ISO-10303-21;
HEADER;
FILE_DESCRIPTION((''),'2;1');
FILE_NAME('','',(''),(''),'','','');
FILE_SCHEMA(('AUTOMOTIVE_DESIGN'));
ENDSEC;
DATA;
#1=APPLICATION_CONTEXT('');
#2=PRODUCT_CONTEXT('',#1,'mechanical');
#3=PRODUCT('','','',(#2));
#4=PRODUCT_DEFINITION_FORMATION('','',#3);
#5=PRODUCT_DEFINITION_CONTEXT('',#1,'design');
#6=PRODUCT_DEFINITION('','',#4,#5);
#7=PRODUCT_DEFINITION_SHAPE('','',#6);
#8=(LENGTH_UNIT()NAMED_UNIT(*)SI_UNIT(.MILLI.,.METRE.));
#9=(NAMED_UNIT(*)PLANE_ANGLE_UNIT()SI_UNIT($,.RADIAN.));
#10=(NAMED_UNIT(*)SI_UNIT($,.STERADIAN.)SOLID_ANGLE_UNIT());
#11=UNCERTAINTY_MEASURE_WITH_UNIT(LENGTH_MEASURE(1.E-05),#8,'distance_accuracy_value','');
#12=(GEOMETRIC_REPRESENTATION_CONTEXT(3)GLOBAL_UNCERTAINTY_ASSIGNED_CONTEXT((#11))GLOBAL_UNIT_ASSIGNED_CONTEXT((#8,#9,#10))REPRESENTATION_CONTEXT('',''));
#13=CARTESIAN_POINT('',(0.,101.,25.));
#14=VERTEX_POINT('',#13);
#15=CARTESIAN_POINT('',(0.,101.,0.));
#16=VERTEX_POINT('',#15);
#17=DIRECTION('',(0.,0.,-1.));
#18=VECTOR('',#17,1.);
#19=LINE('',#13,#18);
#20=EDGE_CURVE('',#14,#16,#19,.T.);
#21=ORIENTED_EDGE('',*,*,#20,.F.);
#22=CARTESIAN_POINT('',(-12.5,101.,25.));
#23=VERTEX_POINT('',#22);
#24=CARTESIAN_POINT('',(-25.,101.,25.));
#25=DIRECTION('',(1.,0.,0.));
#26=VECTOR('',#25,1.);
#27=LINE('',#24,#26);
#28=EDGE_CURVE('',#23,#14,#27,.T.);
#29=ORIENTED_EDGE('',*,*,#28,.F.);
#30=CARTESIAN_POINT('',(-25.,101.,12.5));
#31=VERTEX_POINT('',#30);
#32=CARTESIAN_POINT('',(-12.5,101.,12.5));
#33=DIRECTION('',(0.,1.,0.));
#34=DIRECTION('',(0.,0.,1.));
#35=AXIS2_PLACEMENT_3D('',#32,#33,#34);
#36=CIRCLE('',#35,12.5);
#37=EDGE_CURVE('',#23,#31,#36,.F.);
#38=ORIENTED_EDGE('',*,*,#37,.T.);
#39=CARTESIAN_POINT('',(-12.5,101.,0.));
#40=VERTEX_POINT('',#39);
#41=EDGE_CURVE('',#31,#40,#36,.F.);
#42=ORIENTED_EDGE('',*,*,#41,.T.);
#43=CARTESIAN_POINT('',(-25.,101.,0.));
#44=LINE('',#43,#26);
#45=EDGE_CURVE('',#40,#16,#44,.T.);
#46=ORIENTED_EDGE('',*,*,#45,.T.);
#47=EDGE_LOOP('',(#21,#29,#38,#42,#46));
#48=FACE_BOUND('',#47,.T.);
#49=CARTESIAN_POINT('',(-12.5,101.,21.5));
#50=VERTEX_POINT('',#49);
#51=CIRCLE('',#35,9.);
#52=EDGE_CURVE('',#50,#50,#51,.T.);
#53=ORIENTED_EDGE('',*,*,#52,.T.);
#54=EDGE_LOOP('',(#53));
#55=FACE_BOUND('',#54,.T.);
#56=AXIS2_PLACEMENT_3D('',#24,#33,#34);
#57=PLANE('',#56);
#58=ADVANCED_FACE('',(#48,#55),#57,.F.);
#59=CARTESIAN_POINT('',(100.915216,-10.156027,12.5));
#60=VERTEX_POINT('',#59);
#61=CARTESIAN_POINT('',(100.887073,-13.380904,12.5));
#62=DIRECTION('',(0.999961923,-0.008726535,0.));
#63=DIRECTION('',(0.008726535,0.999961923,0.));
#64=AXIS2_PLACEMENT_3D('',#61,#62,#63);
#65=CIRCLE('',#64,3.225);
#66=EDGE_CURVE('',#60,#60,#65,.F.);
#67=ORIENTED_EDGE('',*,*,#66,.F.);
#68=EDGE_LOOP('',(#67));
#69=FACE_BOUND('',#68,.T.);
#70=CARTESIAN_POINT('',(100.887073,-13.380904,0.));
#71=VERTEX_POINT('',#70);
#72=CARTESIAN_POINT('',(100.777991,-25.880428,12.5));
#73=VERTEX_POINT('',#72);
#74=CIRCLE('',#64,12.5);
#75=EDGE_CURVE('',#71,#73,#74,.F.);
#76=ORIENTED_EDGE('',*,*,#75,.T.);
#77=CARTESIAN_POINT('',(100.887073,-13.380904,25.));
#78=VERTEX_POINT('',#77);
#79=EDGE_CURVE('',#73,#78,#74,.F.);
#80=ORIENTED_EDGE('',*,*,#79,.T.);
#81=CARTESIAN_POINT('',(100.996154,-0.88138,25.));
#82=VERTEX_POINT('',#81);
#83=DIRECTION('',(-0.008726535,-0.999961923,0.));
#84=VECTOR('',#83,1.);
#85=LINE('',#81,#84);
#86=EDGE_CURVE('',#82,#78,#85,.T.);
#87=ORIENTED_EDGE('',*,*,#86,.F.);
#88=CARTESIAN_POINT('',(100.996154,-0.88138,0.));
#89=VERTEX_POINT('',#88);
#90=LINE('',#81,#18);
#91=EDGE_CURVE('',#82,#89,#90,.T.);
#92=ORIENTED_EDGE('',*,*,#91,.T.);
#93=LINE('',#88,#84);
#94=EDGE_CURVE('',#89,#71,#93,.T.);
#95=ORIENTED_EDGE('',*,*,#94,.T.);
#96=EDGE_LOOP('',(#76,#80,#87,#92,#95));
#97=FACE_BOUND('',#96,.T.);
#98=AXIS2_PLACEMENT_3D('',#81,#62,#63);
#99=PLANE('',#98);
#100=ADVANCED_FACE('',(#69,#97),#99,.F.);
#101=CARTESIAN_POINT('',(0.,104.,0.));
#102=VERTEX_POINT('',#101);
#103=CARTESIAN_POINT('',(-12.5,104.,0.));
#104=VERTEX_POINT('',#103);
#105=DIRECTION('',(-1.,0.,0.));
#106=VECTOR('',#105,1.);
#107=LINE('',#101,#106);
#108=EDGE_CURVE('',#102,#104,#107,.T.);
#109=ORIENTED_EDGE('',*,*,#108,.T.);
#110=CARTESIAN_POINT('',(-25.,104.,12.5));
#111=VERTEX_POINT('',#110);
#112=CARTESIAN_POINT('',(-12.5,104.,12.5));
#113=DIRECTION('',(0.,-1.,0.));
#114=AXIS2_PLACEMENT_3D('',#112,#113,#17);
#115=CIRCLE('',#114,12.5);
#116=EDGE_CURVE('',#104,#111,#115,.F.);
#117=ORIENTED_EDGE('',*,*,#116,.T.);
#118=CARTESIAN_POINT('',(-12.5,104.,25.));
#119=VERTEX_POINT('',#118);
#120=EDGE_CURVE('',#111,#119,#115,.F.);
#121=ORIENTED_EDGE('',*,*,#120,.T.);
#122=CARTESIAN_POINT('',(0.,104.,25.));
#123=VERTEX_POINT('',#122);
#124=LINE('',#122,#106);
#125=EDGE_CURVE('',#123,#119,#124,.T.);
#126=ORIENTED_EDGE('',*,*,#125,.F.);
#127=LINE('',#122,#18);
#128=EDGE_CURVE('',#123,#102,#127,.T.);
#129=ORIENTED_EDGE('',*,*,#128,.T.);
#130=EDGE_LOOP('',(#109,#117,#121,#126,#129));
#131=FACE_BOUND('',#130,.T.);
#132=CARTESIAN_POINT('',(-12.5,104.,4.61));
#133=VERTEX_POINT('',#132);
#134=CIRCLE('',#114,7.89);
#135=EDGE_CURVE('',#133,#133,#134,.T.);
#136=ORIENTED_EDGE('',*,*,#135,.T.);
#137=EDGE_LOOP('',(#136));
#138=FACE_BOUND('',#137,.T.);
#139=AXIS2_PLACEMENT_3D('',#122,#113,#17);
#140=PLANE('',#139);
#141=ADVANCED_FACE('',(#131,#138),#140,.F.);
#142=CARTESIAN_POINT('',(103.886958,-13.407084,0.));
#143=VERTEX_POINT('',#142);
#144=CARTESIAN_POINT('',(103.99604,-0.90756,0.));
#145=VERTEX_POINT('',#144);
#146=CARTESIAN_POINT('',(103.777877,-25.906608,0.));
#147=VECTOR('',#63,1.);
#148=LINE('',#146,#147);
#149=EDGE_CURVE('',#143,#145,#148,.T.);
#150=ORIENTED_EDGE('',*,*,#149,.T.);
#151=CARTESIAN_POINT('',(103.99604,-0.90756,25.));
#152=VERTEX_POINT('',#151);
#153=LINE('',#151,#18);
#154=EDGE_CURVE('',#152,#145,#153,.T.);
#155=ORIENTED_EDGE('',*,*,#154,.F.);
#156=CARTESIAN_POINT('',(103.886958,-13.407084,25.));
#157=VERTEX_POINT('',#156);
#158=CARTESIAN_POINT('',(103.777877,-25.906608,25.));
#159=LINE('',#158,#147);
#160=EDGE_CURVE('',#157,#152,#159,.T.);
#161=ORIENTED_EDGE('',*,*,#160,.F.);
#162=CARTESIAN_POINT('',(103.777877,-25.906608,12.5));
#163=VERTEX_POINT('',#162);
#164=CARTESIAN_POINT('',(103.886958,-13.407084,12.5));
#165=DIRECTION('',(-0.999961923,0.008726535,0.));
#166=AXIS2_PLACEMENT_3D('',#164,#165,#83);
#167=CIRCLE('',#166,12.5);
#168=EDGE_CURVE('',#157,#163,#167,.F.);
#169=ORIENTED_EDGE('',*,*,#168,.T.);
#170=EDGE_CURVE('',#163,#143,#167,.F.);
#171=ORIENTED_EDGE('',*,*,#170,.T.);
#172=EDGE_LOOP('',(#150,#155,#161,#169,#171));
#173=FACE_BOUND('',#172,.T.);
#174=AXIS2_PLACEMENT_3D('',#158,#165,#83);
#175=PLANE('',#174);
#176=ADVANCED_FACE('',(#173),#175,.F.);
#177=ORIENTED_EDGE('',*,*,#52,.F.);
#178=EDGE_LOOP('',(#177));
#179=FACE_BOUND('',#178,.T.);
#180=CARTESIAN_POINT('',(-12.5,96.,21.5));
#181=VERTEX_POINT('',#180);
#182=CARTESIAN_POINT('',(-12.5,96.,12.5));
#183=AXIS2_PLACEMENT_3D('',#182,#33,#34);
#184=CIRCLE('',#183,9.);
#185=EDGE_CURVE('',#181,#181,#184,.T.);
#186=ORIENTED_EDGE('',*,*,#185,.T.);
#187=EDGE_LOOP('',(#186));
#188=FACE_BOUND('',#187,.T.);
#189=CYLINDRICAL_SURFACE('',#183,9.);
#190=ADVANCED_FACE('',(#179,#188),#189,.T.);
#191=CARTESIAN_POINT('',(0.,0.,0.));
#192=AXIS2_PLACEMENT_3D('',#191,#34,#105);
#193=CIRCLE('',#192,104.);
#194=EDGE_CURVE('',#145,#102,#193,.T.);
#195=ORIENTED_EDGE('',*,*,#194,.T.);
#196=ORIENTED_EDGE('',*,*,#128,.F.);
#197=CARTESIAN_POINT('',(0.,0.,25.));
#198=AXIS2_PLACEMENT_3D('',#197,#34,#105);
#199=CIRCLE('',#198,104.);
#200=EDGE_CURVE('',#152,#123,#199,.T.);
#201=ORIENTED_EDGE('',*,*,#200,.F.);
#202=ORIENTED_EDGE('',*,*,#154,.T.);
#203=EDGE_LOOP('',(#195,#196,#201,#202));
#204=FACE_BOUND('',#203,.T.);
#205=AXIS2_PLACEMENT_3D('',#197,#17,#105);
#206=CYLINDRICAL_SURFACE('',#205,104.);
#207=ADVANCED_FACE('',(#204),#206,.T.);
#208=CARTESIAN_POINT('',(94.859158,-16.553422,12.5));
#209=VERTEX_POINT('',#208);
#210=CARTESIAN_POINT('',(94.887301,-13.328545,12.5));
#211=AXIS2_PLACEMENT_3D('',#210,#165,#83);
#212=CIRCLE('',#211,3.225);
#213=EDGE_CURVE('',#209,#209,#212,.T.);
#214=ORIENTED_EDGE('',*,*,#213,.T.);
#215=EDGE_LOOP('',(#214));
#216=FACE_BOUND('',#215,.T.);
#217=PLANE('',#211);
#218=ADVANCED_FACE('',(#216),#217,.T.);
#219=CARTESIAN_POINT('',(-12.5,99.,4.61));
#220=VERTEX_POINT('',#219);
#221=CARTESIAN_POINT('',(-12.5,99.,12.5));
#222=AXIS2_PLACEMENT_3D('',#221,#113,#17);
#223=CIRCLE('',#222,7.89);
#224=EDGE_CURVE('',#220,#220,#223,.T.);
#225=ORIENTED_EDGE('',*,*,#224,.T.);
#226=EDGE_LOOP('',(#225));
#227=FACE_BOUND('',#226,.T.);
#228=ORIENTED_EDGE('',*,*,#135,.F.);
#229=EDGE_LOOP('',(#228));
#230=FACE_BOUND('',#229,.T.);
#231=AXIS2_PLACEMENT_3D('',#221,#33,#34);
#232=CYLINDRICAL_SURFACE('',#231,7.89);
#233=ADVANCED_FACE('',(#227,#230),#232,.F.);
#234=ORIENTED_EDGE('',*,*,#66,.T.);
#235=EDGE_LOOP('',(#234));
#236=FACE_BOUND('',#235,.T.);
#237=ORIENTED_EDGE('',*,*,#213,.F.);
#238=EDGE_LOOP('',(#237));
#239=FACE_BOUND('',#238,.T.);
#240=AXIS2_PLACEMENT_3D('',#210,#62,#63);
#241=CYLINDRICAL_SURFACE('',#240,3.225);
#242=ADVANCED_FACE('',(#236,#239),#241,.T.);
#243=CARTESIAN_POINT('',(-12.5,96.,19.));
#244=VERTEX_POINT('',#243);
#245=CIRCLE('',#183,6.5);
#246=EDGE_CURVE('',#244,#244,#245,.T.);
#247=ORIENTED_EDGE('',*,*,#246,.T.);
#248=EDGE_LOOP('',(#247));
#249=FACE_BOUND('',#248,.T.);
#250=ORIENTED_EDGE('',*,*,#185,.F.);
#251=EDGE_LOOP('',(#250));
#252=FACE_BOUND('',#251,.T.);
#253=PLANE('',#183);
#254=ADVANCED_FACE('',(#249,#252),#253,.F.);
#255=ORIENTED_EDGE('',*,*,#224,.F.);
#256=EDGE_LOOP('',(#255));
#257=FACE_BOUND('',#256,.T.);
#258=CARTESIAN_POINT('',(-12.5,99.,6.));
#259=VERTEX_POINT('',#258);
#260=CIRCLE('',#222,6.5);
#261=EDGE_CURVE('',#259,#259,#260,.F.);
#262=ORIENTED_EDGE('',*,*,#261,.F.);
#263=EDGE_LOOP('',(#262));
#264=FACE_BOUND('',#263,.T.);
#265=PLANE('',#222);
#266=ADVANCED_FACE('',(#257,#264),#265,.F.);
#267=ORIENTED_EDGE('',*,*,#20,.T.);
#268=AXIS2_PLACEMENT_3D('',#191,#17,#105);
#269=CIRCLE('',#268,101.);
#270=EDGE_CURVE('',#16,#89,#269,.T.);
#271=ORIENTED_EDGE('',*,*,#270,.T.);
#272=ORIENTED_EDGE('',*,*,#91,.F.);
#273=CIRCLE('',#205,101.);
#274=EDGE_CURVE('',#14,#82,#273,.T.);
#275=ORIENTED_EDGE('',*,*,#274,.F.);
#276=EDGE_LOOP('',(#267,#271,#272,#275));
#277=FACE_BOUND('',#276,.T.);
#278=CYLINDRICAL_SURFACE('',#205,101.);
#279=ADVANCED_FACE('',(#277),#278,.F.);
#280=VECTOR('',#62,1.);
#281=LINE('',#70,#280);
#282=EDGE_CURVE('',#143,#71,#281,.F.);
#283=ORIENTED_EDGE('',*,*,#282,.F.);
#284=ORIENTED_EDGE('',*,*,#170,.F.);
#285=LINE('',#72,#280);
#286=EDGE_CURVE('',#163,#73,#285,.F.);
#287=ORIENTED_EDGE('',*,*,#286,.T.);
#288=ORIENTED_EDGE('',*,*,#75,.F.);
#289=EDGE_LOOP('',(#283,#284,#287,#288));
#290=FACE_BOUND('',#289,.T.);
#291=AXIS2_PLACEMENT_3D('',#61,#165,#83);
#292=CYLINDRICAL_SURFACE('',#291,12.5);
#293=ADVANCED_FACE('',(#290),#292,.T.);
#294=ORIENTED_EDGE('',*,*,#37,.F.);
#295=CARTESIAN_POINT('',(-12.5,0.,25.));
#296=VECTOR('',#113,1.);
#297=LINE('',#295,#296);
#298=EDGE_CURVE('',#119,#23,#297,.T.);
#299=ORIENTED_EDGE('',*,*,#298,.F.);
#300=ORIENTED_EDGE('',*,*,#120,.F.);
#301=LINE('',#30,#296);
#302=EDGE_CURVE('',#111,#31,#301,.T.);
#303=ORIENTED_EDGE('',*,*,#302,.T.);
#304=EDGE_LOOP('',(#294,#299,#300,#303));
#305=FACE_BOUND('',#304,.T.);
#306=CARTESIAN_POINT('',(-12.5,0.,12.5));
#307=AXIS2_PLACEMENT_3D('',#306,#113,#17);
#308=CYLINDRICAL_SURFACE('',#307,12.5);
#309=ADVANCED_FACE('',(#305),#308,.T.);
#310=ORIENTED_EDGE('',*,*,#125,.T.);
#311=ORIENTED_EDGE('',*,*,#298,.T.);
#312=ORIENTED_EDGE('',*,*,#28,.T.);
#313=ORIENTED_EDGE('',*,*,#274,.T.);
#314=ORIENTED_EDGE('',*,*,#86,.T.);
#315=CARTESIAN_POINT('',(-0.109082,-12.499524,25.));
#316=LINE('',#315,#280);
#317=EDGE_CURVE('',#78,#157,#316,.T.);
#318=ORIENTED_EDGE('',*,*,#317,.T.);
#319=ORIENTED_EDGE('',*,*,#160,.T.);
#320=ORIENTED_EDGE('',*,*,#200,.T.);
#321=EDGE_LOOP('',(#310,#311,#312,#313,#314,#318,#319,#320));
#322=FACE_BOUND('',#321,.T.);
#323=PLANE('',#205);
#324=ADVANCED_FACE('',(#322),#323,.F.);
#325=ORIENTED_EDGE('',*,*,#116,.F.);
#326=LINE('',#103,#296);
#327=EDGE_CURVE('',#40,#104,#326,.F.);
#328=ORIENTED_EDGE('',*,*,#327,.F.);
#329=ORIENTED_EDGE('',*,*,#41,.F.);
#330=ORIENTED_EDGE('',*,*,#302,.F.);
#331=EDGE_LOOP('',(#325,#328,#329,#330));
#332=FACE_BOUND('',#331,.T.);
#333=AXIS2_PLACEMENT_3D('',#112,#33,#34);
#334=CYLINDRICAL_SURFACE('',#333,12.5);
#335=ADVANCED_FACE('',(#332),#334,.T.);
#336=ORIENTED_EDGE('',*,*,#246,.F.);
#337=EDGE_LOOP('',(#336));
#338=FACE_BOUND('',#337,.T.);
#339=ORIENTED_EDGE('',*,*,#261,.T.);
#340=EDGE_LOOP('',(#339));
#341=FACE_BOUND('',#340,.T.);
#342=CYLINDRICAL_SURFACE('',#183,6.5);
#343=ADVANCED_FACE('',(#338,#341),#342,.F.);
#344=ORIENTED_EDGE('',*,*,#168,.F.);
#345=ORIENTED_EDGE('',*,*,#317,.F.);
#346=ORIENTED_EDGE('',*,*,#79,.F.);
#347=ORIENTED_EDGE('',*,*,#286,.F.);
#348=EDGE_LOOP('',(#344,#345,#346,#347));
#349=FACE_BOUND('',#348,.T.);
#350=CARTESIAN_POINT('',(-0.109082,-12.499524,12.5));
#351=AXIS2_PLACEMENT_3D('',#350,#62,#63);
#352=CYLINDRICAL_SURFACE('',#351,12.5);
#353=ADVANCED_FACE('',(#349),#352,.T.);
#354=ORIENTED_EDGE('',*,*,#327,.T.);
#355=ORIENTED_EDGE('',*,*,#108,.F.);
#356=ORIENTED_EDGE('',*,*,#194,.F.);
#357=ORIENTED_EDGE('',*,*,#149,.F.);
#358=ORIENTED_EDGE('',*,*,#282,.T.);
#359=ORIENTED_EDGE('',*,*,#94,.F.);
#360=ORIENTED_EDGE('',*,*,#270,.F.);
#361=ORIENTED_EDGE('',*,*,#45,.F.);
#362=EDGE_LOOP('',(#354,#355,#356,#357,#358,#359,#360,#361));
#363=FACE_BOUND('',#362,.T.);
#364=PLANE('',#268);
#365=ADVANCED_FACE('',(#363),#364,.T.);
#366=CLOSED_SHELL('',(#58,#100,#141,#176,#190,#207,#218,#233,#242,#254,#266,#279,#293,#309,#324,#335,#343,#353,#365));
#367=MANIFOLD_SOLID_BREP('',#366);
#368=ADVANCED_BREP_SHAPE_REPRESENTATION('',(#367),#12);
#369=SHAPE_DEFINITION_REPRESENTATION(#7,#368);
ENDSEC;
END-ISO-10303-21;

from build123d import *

# Parameters (mm, degrees)
BOSS_EXTRUDE1_DEPTH = 25
FILLET1_R           = 12.5
SKETCH4_R           = 3.225
BOSS_EXTRUDE2_DEPTH = 6
SKETCH6_R           = 9
SKETCH6_R_2         = 6.5
BOSS_EXTRUDE3_DEPTH = 5
SKETCH5_R           = 7.89
CUT_EXTRUDE1_DEPTH  = 5


with BuildPart() as part:
    # Sketch2 → Boss-Extrude1 (new body)
    with BuildSketch(Plane.XY):
        with BuildLine():
            Line((0, 104), (-25, 104))
            Line((-25, 104), (-25, 101))
            Line((-25, 101), (0, 101))
            ThreePointArc((0, 101), (71.728722938, 71.10548717), (100.996154229, -0.881380085))
            Line((100.996154229, -0.881380085), (100.777990842, -25.880428162))
            Line((100.777990842, -25.880428162), (103.777876611, -25.906607768))
            Line((103.777876611, -25.906607768), (103.996039999, -0.907559692))
            ThreePointArc((103.996039999, -0.907559692), (73.859279065, 73.217531343), (0, 104))
        make_face()
    extrude(amount=BOSS_EXTRUDE1_DEPTH)

    # Fillet1
    fillet1_edges = [part.edges().sort_by_distance(p)[0] for p in [
        (102.277933727, -25.893517965, 0),
        (102.277933727, -25.893517965, 25),
        (-25, 102.5, 25),
        (-25, 102.5, 0),
    ]]
    fillet(fillet1_edges, radius=FILLET1_R - 0.0001)  # a hair under: the kernel refuses the full size

    # Sketch4 → Boss-Extrude2 (add)
    with BuildSketch(Plane(origin=(100.996154229, -0.881380085, 0), x_dir=(0, 0, 1), z_dir=(-0.9999619230641714, 0.008726535498377326, 0))):
        with Locations(Location((12.5, -12.5, 0), (0, 0, 90))):
            Circle(SKETCH4_R)
    extrude(amount=BOSS_EXTRUDE2_DEPTH)

    # Sketch6 → Boss-Extrude3 (add)
    with BuildSketch(Plane(origin=(0, 101, 0), x_dir=(1, 0, 0), z_dir=(0, 1, 0))):
        with Locations(Location((-12.5, -12.5, 0), (0, 0, 270))):
            Circle(SKETCH6_R)
        with Locations(Location((-12.5, -12.5, 0), (0, 0, 270))):
            Circle(SKETCH6_R_2, mode=Mode.SUBTRACT)
    extrude(amount=-BOSS_EXTRUDE3_DEPTH)

    # Sketch5 → Cut-Extrude1 (cut)
    with BuildSketch(Plane.XZ.offset(-104)):
        with Locations(Location((-12.5, 12.5, 0), (0, 0, 270))):
            Circle(SKETCH5_R)
    extrude(amount=CUT_EXTRUDE1_DEPTH, mode=Mode.SUBTRACT)


solid = part.part
